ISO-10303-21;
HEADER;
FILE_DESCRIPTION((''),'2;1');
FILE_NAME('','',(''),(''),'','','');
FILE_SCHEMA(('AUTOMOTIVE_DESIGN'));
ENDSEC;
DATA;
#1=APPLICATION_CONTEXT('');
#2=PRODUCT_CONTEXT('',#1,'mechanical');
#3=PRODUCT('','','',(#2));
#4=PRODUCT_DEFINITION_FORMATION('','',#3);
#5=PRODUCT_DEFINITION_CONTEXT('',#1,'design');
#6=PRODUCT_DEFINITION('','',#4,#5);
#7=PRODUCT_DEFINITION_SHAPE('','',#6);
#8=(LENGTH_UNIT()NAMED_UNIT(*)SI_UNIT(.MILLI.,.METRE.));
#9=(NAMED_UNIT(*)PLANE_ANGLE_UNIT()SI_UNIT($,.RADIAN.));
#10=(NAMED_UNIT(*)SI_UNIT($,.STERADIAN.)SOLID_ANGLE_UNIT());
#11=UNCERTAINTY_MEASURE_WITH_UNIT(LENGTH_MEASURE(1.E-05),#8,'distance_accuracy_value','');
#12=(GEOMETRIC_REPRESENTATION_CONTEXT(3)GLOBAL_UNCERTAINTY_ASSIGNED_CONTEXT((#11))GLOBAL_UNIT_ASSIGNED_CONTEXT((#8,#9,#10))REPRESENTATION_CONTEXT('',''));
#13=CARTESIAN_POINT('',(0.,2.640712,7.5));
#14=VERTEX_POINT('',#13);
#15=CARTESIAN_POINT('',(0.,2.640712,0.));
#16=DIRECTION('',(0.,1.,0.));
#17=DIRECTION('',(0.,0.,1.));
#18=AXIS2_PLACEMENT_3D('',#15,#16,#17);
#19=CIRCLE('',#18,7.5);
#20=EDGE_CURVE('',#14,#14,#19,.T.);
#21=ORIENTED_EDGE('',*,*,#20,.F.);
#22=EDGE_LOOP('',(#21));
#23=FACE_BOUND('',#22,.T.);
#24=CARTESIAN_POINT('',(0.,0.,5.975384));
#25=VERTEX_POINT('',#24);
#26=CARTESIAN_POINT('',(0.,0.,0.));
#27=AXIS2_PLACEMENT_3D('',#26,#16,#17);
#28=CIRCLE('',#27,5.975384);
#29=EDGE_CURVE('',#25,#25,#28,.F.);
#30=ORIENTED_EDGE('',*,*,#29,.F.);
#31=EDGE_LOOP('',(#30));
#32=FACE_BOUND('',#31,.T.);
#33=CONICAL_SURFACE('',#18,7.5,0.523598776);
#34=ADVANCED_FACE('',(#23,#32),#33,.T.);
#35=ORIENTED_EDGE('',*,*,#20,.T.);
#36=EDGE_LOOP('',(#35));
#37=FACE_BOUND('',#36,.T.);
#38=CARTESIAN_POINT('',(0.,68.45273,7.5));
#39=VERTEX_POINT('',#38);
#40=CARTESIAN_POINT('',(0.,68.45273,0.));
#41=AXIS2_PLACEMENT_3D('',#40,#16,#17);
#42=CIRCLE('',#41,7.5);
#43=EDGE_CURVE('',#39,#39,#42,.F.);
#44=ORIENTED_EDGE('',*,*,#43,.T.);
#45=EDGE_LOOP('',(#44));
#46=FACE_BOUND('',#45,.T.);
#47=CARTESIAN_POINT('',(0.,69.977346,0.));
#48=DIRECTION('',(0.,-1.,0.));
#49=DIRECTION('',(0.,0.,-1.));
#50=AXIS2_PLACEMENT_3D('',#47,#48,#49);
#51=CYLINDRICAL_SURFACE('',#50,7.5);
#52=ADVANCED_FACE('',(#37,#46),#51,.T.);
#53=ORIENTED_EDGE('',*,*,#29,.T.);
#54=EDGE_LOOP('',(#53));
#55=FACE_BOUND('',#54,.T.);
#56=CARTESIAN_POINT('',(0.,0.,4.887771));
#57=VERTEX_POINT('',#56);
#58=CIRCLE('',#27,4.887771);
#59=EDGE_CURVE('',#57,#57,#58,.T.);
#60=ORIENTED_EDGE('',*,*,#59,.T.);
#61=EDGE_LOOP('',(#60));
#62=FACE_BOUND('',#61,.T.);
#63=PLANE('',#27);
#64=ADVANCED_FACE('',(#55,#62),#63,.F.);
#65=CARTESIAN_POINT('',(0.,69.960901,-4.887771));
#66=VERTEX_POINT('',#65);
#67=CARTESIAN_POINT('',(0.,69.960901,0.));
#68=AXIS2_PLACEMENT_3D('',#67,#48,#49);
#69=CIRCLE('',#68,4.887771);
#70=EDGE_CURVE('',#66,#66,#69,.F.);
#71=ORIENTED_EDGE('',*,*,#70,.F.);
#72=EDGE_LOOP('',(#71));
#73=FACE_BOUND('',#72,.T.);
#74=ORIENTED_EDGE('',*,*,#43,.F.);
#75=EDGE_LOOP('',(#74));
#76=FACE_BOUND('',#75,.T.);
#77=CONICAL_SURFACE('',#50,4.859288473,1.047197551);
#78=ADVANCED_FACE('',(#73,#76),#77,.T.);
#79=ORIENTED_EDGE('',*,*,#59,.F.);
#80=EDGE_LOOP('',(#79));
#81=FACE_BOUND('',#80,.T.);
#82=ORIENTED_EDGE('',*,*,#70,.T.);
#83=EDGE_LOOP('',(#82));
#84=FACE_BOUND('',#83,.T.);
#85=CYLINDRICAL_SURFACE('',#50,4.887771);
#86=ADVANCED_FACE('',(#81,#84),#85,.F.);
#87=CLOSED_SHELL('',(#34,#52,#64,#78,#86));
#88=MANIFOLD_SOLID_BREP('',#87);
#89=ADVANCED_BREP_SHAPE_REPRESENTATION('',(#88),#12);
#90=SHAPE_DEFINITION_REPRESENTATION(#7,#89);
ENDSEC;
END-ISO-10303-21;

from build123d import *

# Parameters (mm, degrees)
SKETCH1_R           = 7.5
BOSS_EXTRUDE1_DEPTH = 69.977346
SKETCH2_R           = 4.887771224
CUT_EXTRUDE1_DEPTH  = 71.776613039
CHAMFER1_SIZE       = 1.524616
CHAMFER1_SIZE_2     = 2.640712


with BuildPart() as part:
    # Sketch1 → Boss-Extrude1 (new body)
    with BuildSketch(Plane(origin=(0, 0, 0), x_dir=(1, 0, 0), z_dir=(0, 1, 0))):
        with Locations(Location((0, 0, 0), (0, 0, 270))):
            Circle(SKETCH1_R)
    extrude(amount=BOSS_EXTRUDE1_DEPTH)

    # Sketch2 → Cut-Extrude1 (cut, through all)
    with BuildSketch(Plane(origin=(0, 0, 0), x_dir=(1, 0, 0), z_dir=(0, 1, 0))):
        with Locations(Location((0, 0, 0), (0, 0, 270))):
            Circle(SKETCH2_R)
    extrude(amount=CUT_EXTRUDE1_DEPTH, mode=Mode.SUBTRACT)

    # Chamfer1
    # the kernel refuses this chamfer: 2.640712, 1.524616 mm, written as the material it takes off along each edge
    with BuildSketch(Plane(origin=(0, 69.977346, 0), x_dir=(0, 0, 1), z_dir=(-1, 0, 0))) as chamfer1_piece_1:
        Polygon((7.5, -CHAMFER1_SIZE), (7.5 - CHAMFER1_SIZE_2, 0), (7.5, 0), align=None)
    revolve(axis=Axis((0, 69.977346, 0), (0, 1, 0)), mode=Mode.SUBTRACT)
    with BuildSketch(Plane(origin=(0, 0, 0), x_dir=(0, 0, 1), z_dir=(-1, 0, 0))) as chamfer1_piece_2:
        Polygon((7.5, CHAMFER1_SIZE_2), (7.5 - CHAMFER1_SIZE, 0), (7.5, 0), align=None)
    revolve(axis=Axis((0, 0, 0), (0, 1, 0)), mode=Mode.SUBTRACT)


solid = part.part
